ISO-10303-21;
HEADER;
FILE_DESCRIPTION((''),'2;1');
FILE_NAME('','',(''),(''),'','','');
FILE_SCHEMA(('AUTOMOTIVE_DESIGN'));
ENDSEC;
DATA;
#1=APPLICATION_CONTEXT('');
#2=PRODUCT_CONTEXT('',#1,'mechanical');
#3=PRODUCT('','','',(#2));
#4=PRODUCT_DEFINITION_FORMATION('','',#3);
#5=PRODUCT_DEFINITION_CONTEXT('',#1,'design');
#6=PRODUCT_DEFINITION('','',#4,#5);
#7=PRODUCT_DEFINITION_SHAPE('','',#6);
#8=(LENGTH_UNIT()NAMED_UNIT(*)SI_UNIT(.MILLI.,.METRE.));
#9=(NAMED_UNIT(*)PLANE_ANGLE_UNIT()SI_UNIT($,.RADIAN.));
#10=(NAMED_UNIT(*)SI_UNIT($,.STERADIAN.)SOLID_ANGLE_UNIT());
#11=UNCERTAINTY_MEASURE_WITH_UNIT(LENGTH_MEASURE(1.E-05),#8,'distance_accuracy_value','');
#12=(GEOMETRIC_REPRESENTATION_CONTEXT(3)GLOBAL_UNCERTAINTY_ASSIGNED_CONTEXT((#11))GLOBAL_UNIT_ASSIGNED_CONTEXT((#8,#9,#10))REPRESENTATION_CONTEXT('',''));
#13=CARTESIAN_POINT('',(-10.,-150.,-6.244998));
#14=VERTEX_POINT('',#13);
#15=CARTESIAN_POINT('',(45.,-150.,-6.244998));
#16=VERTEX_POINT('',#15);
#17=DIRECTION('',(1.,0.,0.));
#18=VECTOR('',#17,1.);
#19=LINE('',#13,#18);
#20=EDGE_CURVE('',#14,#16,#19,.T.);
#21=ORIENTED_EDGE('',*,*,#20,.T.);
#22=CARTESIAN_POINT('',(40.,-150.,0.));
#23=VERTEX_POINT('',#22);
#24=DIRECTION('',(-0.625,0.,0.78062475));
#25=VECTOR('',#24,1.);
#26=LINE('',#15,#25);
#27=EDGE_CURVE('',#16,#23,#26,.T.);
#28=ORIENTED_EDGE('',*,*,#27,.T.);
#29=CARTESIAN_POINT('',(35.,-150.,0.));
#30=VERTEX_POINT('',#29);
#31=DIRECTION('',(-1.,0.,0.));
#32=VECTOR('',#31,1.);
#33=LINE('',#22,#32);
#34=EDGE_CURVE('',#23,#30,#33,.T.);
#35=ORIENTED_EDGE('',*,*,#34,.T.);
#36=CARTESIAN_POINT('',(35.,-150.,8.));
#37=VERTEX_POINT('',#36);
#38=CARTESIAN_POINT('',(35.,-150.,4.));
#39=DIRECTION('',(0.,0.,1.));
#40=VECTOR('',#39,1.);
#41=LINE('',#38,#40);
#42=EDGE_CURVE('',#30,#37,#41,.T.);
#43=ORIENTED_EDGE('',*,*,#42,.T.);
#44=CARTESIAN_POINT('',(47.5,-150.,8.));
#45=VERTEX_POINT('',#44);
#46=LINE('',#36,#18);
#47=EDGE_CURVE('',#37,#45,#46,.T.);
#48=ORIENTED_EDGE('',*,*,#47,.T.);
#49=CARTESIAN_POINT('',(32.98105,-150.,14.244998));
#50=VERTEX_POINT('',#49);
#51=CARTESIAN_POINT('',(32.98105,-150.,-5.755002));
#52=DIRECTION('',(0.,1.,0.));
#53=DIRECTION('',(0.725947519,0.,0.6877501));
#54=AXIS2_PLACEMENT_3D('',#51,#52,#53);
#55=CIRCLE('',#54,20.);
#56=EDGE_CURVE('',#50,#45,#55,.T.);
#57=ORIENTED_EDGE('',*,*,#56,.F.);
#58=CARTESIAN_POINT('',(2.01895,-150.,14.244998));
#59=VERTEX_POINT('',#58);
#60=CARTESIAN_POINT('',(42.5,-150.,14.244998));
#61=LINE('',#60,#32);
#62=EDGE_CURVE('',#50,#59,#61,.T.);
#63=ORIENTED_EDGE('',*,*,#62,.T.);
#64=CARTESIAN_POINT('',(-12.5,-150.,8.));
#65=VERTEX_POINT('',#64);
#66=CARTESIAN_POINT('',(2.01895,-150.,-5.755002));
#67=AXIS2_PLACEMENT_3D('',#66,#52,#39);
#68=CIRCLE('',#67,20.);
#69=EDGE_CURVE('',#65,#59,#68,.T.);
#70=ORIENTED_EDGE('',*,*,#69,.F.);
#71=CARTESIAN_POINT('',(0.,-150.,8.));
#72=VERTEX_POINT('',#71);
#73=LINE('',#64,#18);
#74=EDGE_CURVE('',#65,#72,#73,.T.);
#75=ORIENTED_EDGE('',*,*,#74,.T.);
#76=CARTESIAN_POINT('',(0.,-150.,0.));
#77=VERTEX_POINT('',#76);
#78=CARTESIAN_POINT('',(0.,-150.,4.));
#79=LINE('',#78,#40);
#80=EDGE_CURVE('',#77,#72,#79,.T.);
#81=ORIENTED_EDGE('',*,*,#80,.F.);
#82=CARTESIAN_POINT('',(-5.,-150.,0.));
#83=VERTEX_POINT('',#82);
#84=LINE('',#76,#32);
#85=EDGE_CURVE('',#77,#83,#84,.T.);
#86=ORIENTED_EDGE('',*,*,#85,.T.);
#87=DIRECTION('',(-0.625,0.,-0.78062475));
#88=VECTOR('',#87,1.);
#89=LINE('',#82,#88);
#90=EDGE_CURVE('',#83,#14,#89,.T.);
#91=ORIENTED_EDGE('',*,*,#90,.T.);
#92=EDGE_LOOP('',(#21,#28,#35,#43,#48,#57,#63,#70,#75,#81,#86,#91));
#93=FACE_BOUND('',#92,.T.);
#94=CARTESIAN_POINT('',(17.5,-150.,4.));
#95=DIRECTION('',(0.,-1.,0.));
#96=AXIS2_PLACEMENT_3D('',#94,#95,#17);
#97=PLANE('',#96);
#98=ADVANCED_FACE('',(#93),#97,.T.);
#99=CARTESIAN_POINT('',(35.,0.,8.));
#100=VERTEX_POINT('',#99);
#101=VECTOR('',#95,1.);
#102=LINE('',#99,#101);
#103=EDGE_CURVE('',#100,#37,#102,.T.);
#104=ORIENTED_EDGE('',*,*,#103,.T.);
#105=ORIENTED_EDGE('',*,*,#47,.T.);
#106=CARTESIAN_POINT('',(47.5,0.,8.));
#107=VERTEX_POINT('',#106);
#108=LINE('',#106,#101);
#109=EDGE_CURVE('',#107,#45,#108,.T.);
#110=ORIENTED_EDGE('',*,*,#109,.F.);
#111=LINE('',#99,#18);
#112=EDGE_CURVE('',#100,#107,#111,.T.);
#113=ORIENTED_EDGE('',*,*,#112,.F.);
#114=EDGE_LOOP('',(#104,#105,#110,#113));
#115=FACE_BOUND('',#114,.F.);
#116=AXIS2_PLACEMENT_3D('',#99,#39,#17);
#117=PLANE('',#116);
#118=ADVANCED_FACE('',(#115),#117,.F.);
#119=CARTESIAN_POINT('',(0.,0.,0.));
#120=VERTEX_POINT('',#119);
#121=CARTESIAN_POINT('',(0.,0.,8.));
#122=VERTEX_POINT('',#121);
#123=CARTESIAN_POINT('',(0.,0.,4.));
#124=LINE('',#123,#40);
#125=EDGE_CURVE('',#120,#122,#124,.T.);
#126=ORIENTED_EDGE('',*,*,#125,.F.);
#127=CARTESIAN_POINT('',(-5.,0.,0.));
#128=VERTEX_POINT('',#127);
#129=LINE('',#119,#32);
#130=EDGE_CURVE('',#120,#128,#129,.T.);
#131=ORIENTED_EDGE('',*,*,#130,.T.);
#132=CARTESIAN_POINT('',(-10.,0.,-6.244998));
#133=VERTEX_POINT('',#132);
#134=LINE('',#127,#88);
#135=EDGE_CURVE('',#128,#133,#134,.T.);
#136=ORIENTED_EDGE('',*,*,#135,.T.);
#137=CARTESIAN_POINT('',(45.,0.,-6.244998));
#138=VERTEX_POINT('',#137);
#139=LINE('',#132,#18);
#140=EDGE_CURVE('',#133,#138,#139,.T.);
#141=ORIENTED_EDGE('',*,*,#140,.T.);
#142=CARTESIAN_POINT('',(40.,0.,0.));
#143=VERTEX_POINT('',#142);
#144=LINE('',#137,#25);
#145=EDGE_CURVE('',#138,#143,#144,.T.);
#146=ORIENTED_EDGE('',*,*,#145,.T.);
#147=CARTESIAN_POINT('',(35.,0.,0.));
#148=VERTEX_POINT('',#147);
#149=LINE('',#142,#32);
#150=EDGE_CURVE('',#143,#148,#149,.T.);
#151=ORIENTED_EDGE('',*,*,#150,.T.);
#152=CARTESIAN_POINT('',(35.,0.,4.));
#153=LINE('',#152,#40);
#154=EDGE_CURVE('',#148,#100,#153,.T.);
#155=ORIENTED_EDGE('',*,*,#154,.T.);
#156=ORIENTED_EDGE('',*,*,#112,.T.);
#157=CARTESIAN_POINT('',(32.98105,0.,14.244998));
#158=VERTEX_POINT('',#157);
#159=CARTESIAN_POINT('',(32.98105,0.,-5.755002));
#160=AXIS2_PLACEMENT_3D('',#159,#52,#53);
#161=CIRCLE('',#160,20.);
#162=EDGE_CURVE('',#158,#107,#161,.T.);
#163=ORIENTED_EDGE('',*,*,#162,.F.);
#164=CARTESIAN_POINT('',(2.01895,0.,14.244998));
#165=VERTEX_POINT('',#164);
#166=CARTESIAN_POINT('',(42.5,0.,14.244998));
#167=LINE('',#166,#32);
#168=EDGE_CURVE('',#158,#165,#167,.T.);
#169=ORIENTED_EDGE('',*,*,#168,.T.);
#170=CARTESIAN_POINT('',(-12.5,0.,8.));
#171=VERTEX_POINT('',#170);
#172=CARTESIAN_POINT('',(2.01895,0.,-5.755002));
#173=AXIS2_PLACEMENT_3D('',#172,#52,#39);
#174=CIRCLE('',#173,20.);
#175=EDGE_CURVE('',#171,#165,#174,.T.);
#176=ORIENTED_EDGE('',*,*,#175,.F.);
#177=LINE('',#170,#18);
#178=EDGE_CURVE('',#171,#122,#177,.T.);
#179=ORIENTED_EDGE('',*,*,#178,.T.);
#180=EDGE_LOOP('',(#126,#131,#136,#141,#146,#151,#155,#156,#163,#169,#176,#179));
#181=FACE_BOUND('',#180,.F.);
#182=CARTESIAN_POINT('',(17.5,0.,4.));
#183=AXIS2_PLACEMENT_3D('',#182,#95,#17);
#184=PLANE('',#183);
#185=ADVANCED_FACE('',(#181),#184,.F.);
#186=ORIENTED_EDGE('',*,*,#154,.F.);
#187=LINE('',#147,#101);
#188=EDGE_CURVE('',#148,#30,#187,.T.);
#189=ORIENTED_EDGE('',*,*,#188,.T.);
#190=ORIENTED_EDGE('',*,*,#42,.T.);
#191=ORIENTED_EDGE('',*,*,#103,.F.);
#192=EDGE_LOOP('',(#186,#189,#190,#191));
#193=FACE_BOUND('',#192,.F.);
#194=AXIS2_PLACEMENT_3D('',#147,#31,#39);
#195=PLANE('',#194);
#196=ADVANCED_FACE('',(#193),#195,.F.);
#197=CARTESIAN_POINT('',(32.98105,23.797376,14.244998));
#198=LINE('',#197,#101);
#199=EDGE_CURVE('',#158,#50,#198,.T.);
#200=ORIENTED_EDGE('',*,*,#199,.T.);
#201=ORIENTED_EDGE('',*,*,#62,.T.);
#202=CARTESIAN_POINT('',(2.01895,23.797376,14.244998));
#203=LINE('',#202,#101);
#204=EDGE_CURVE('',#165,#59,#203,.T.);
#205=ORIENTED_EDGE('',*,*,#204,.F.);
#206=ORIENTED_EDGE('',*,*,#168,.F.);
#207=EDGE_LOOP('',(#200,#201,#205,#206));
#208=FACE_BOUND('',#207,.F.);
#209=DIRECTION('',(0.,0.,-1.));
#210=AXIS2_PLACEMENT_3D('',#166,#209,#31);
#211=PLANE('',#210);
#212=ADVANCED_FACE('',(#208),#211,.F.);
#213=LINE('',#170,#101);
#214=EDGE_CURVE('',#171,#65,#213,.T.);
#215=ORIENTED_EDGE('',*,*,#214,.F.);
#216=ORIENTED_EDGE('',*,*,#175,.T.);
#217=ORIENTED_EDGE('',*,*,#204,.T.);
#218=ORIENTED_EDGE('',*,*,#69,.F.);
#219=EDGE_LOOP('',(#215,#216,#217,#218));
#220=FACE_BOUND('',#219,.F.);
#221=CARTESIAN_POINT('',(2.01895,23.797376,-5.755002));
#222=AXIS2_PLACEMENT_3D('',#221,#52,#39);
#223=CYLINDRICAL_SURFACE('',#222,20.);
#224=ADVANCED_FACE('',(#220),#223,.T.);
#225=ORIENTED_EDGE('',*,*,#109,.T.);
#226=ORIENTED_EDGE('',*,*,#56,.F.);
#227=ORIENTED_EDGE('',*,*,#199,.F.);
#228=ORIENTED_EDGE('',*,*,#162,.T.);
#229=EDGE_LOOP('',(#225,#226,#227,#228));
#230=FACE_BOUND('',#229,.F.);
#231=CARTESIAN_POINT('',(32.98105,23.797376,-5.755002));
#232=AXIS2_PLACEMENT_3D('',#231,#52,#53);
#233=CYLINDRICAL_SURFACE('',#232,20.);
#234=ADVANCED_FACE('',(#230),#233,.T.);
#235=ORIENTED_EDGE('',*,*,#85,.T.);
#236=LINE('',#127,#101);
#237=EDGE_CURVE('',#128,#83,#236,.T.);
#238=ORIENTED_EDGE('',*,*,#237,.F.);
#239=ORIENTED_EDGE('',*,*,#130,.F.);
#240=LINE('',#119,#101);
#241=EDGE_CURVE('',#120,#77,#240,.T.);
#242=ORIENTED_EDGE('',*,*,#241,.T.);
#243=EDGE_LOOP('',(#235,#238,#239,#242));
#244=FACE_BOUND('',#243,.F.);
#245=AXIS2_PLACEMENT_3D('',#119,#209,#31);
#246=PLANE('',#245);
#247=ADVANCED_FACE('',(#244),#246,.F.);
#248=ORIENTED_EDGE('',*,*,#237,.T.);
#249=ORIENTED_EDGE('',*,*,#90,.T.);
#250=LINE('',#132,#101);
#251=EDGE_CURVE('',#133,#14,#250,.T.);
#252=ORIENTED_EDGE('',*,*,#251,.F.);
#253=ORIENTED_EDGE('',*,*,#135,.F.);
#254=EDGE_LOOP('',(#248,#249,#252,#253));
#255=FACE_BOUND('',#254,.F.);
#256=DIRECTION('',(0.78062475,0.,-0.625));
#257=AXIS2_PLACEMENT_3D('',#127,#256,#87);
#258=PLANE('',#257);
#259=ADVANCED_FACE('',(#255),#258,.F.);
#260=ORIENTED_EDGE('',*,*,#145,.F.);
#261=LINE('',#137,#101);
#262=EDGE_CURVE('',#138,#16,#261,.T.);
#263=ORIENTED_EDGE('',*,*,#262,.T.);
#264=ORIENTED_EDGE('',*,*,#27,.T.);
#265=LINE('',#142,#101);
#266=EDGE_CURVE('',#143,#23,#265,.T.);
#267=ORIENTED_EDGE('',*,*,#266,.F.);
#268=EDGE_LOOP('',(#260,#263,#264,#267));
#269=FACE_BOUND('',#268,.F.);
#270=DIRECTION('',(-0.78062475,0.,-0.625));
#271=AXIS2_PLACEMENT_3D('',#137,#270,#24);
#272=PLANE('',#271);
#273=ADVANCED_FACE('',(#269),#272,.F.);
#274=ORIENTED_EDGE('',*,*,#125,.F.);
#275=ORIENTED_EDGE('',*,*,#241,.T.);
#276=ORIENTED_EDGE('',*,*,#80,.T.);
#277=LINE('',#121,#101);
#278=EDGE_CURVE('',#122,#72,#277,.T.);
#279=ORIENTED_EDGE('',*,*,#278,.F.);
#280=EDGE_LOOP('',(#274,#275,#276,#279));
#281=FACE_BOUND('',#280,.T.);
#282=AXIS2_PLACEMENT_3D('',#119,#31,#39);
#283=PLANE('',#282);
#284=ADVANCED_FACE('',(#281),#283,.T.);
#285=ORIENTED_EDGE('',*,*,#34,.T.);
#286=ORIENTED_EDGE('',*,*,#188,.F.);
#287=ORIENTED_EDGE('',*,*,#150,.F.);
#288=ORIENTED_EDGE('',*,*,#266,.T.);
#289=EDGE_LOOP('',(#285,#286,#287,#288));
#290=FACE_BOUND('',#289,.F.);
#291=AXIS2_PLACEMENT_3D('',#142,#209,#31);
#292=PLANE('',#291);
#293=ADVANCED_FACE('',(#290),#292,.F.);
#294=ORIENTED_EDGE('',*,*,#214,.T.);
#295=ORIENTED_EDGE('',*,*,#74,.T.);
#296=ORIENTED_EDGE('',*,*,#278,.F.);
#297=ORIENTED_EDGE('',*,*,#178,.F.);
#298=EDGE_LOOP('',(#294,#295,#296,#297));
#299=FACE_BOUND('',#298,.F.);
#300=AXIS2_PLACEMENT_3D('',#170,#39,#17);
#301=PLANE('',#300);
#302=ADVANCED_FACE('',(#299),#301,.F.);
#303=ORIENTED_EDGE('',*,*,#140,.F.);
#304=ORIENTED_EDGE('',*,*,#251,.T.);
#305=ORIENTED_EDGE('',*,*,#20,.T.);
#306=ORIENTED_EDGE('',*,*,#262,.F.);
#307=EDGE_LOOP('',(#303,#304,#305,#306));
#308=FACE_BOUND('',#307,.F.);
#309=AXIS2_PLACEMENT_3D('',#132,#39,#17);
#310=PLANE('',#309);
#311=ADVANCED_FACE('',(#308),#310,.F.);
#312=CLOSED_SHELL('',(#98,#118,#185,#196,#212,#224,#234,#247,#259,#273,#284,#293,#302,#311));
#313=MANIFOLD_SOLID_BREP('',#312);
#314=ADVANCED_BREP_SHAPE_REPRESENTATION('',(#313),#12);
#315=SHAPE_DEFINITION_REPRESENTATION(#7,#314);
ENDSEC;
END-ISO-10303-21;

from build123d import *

# Parameters (mm, degrees)
F0_W        = 35
F0_H        = 8
F1_DEPTH    = 150
F2_T1_DEPTH = 197.5947518654


# Not quite as in the source:
# - a fillet or chamfer that OpenCascade refuses, or shapes differently, is made with other operations: its cross-section is extruded or revolved along the edge and cut away or added


with BuildPart() as f1:
    # F0 (on Front) → F1 (new body)
    with BuildSketch(Plane.XZ):
        with Locations((17.5, 4)):
            Rectangle(F0_W, F0_H)
        Polygon((35, 0), (0, 0), (-5, 0), (-10, -6.2449979984), (45, -6.2449979984), (40, 0), align=None)
        Polygon((-12.5, 8), (0, 8), (35, 8), (47.5, 8), (42.5, 14.2449979984), (-7.5, 14.2449979984), align=None)
    extrude(amount=F1_DEPTH)

    # F2: fillet of radius 20 on 2 edges, made by hand

    # F2_s2 → F2_t1 (cut)
    with BuildSketch(Plane.XZ.offset(-23.7973759327)):
        with BuildLine():
            ThreePointArc((2.0189503731, 14.2449979984), (-5.8835796005, 12.6175323912), (-12.5, 8))
            Line((-12.5, 8), (-7.5, 14.2449979984))
            Line((-7.5, 14.2449979984), (2.0189503731, 14.2449979984))
        make_face()
        with BuildLine():
            ThreePointArc((47.5, 8), (40.8835796005, 12.6175323912), (32.9810496269, 14.2449979984))
            Line((32.9810496269, 14.2449979984), (42.5, 14.2449979984))
            Line((42.5, 14.2449979984), (47.5, 8))
        make_face()
    extrude(amount=F2_T1_DEPTH, mode=Mode.SUBTRACT)


solid = f1.part
